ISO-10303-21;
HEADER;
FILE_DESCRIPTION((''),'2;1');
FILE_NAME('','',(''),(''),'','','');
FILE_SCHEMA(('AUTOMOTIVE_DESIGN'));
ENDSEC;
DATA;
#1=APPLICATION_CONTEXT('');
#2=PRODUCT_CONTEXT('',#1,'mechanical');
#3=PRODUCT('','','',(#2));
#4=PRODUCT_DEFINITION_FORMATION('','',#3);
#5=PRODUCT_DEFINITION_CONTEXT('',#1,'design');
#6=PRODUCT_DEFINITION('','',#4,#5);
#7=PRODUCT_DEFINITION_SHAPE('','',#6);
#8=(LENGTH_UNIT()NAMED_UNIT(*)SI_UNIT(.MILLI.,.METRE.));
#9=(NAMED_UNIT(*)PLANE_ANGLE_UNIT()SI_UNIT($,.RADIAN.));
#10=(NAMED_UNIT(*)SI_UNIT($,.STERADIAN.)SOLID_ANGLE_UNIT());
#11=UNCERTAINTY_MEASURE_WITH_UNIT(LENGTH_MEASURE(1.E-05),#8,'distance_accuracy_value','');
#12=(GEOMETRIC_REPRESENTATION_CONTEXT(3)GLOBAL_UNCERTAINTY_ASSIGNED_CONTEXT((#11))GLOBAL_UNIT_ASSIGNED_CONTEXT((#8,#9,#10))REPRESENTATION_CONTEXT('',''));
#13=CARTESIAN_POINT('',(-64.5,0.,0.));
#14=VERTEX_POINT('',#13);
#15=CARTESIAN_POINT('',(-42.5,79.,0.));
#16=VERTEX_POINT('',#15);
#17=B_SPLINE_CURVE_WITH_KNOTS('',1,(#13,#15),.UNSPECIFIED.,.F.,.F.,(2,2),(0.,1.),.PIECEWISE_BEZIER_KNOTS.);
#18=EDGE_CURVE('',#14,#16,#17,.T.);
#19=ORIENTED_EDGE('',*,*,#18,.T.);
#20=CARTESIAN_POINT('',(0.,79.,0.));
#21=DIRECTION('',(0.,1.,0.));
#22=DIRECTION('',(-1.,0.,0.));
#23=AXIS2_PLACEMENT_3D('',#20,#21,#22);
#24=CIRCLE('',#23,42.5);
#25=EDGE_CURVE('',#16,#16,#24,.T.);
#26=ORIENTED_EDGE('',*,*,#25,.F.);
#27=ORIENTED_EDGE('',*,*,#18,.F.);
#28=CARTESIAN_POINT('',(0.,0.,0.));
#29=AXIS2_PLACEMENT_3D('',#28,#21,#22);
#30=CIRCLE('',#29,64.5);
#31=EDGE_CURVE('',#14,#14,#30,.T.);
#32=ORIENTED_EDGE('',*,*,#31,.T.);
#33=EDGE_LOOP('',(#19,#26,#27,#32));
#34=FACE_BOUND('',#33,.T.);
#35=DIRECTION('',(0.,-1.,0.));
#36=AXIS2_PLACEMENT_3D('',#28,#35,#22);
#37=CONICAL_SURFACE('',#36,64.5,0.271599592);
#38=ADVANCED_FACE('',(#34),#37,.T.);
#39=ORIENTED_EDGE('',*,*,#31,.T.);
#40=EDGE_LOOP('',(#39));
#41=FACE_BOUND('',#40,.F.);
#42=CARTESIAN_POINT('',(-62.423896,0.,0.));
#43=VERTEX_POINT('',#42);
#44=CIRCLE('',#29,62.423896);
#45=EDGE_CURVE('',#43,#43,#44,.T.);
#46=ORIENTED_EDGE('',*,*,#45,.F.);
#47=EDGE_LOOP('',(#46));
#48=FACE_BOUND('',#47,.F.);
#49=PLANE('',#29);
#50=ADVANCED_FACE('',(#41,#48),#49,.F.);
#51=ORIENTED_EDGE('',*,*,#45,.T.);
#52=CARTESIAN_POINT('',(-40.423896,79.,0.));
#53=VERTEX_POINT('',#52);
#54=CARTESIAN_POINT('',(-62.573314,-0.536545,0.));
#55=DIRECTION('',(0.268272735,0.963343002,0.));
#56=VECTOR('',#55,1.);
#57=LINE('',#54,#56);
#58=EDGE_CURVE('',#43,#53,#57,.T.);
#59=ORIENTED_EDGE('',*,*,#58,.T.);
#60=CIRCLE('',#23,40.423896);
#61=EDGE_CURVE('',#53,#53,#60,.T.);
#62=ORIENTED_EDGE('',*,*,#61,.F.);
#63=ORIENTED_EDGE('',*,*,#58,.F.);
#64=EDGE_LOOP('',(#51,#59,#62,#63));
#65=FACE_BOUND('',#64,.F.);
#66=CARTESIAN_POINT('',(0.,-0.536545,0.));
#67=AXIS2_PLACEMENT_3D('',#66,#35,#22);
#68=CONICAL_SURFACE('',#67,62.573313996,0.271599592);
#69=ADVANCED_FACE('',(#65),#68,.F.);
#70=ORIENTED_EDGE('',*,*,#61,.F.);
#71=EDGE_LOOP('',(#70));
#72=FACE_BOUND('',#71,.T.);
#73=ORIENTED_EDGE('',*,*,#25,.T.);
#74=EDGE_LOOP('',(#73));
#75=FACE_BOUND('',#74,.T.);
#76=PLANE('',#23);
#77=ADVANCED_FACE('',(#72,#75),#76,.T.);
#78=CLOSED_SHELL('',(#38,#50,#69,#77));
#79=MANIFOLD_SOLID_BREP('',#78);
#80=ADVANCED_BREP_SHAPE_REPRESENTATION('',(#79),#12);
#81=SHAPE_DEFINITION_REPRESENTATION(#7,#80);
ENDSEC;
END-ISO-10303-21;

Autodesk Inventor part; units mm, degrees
ref_plane "YZ Plane" through (0, 0, 0) normal (1, 0, 0) x (0, 1, 0)
ref_plane "XY Plane" through (0, 0, 0) normal (0, 0, 1) x (1, 0, 0)
sketch "Szkic6" plane through (0, 0, 0) normal (0, 1, 0) x (-1, 0, 0)
  circle A0 centre (0, 0) radius 64.5
  dimension "d33" = 129
ref_plane "Płaszczyzna konstrukcyjna1" through (0, 79, 0) normal (0, 1, 0) x (-1, 0, 0)
sketch "Szkic7" plane through (0, 79, 0) normal (0, 1, 0) x (-1, 0, 0)
  circle A0 centre (0, 0) radius 42.5
  dimension "d35" = 85
loft "Wyciągnięcie złożone1" add profiles "Szkic6", "Szkic7"
shell "Skorupa1" thickness 2 removed faces 2 at (10.6049, 79, 7.3037) at (-10.0865, 0, -16.1433)
equation "\"d33\" = OD1"
equation "\"d35\" = OD2"
equation "\"d52\" = THK"
equation "\"SzerokośćGięciaPodcięcia\" = Grubość"
equation "\"RozmiarPodcięciaNarożnika\" = 4 * Grubość"
equation "\"PromieńPrzejścia\" = PromieńGięcia"
equation "\"Rozmiar_promienia_Jacobiego\" = PromieńGięcia"
equation "\"Wielk_odstępu\" = Grubość"
equation "\"d2\" = PromieńGięcia"
equation "\"d23\" = PromieńGięcia"
equation "\"OD1\" = 129"
equation "\"OD2\" = 85"
equation "\"L\" = 79"
equation "\"THK\" = 2"
equation "\"d34\" = L"
equation "\"Grubość\" = 1.5"
equation "\"PromieńGięcia\" = 3"
properties part number "Redukcja symetryczna Ø129x85x2 L=79" material "304"
